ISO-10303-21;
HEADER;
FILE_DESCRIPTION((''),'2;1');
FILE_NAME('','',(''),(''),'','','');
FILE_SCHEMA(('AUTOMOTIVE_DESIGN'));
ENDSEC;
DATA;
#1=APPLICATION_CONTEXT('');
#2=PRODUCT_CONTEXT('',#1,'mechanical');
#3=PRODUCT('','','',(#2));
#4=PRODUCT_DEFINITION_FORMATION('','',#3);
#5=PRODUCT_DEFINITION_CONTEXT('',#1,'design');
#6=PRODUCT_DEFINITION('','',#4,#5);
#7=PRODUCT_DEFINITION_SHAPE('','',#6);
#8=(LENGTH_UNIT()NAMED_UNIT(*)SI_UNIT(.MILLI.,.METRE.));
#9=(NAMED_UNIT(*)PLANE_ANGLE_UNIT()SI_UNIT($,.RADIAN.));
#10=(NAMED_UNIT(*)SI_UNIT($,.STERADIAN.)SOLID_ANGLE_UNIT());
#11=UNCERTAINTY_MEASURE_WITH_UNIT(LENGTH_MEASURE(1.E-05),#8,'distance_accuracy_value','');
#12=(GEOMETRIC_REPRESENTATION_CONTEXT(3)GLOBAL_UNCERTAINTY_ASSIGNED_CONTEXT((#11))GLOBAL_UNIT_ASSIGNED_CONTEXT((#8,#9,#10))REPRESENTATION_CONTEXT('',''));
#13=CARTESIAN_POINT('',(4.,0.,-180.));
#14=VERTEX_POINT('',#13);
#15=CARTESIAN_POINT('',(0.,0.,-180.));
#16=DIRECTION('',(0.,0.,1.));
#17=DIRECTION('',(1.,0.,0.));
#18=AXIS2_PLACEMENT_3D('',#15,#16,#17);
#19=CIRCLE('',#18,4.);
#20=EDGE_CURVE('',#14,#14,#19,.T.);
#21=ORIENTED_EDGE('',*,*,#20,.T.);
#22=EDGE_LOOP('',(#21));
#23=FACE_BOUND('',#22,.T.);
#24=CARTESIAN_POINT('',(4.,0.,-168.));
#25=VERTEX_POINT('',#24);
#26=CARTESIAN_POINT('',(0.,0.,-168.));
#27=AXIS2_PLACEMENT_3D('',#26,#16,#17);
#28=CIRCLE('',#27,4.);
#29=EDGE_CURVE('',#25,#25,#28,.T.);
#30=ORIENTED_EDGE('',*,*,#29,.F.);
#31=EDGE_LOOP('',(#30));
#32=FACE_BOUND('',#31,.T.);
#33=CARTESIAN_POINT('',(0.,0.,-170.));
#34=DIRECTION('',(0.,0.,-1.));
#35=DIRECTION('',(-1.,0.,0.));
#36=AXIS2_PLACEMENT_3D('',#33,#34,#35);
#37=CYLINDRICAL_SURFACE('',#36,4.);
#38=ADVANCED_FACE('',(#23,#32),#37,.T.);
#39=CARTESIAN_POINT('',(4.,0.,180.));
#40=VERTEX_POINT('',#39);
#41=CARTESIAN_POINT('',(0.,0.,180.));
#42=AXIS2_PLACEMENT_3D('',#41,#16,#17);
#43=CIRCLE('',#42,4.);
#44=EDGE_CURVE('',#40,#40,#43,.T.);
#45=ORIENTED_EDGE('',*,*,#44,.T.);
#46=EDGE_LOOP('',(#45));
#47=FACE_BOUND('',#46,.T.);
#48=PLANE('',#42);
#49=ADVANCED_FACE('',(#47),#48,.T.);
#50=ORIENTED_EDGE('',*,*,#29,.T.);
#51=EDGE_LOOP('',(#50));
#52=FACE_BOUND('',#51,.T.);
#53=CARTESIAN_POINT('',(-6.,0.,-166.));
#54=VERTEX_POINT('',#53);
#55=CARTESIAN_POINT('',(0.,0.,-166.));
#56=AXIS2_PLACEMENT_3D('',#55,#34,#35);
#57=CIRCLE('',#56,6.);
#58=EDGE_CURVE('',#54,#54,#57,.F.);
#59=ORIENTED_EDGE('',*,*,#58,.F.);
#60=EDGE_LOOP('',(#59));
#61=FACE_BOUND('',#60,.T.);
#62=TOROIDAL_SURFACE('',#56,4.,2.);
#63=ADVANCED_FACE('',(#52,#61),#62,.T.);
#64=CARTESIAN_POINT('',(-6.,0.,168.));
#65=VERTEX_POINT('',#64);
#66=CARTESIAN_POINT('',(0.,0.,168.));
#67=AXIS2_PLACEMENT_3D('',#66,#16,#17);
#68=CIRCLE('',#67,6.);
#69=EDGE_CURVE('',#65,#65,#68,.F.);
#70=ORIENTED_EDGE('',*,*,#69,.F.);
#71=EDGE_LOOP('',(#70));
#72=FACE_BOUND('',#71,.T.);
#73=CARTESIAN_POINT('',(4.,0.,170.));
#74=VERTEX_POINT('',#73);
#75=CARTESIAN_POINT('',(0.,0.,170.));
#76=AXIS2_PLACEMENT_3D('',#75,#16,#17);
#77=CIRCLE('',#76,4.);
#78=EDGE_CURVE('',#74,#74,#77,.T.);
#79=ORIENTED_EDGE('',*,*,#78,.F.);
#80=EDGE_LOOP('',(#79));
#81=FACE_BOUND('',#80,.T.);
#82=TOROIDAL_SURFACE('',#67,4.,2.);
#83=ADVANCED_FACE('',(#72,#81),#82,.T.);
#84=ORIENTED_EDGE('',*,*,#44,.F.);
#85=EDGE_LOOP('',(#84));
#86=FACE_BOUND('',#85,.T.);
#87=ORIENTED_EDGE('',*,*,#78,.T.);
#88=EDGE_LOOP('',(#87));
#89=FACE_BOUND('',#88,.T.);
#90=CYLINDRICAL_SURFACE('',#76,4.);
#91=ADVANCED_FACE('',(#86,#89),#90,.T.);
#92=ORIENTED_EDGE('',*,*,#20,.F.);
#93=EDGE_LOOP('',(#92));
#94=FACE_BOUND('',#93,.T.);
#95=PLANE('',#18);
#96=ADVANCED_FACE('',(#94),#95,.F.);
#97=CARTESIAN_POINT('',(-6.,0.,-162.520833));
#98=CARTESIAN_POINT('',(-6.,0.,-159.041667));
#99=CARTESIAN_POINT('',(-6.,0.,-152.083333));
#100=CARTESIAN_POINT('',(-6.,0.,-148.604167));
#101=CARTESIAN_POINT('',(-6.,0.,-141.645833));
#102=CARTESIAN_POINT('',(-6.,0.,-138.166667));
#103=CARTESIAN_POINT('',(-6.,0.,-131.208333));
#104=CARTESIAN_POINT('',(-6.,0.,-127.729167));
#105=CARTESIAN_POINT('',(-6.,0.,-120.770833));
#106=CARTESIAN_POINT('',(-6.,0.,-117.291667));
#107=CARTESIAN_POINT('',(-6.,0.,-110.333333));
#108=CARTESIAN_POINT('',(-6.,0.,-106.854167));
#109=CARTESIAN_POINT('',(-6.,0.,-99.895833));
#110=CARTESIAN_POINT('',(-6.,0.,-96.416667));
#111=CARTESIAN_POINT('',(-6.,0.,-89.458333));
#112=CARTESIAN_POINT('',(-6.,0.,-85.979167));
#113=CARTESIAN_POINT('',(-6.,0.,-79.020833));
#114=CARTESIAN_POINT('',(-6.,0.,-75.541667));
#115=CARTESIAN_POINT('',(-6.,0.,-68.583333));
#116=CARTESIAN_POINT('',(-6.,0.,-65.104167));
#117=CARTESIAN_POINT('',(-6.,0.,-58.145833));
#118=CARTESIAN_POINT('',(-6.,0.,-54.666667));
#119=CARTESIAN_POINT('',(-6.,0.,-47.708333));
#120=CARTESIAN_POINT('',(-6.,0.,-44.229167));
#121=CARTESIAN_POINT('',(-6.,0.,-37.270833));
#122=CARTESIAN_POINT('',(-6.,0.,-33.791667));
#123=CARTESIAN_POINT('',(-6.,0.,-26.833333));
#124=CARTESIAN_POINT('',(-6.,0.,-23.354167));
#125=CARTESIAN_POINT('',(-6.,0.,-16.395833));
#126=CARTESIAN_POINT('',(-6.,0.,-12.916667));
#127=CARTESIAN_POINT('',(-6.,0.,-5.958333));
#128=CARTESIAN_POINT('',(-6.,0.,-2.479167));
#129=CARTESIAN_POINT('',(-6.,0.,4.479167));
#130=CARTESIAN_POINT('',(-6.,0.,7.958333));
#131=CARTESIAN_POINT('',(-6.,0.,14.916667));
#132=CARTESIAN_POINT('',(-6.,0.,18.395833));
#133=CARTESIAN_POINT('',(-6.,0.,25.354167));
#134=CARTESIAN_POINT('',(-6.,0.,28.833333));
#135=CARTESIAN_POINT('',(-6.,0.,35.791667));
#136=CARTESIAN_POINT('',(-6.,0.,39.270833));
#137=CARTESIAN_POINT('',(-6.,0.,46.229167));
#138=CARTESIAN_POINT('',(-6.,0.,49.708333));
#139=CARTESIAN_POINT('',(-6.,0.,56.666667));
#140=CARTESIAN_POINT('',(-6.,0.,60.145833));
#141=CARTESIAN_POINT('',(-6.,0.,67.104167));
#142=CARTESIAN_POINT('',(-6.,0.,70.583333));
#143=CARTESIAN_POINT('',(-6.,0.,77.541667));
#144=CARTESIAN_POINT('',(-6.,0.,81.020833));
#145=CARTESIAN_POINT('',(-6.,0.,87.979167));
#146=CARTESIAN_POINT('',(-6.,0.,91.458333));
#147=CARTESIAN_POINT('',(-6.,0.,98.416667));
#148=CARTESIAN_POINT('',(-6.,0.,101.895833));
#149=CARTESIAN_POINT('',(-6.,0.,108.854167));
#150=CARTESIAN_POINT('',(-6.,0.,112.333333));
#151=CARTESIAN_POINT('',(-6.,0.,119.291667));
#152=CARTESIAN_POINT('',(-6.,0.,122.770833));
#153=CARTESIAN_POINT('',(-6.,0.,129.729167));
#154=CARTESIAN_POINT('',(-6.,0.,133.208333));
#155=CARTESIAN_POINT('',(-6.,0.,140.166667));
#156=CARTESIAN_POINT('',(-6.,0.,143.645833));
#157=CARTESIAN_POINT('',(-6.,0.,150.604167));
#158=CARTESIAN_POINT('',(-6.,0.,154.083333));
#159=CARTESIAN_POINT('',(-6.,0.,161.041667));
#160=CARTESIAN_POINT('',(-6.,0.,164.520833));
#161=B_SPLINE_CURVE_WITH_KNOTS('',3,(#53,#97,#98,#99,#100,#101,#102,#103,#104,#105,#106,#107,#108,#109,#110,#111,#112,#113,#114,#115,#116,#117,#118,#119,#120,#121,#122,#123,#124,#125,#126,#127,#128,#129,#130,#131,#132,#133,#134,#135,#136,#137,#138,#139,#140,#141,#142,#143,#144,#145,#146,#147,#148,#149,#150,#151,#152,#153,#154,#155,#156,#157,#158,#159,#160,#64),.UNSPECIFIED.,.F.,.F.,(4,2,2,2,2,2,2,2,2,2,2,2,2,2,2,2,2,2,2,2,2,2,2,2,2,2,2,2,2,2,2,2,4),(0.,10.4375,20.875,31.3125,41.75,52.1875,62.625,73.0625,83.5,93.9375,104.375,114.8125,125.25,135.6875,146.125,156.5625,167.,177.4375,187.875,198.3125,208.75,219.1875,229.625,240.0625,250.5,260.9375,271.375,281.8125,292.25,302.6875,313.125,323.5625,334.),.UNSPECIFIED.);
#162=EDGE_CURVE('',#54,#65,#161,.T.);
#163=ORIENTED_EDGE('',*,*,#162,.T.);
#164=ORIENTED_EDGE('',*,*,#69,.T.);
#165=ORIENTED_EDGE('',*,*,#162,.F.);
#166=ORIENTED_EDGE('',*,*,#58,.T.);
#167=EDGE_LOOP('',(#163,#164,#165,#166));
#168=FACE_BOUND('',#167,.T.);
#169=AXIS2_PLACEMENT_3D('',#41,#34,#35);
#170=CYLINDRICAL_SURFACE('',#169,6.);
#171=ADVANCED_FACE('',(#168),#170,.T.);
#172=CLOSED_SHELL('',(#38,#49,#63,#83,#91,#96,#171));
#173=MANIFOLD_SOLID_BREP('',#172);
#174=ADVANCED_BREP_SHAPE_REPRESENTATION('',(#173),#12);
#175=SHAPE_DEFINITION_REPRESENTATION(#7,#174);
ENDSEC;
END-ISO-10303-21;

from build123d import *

# Parameters (mm, degrees)
SKETCH1_R              = 6
BOSS_EXTRUDE1_DEPTH    = 180
SKETCH2_R              = 6
SKETCH2_R_2            = 4
CUT_EXTRUDE1_DEPTH     = 10
FILLET1_R              = 2
FILLET1_OF_MIRROR1_R   = 2
MOVE_START             = -180.0000001
MOVE_FACE1_2_OUTLINE_W = 16
MOVE_FACE1_2_OUTLINE_H = 16
MOVE_FACE1_2_OUTLINE_R = 4
MOVE_FACE1_2_DEPTH     = 12.0000001


with BuildPart() as part:
    # Sketch1 → Boss-Extrude1 (new, symmetric)
    with BuildSketch(Plane.XY):
        with Locations(Location((0, 0, 0), (0, 0, 180))):
            Circle(SKETCH1_R)
    extrude(amount=BOSS_EXTRUDE1_DEPTH, both=True)

    # Sketch2 → Cut-Extrude1 (cut)
    with BuildSketch(Plane.XY.offset(180)):
        with Locations(Location((0, 0, 0), (0, 0, 180))):
            Circle(SKETCH2_R)
        Circle(SKETCH2_R_2, mode=Mode.SUBTRACT)
    cut_extrude1 = extrude(amount=-CUT_EXTRUDE1_DEPTH, mode=Mode.SUBTRACT)

    # Fillet1
    fillet1_edges = [part.edges().sort_by_distance(p)[0] for p in [
        (6, 0, 170),
    ]]
    fillet(fillet1_edges, radius=FILLET1_R - 0.0001)  # a hair under: the kernel refuses the full size

    # Mirror1: Cut-Extrude1 across plane
    add(cut_extrude1.mirror(Plane.XY), mode=Mode.SUBTRACT)

    # Fillet1 of Mirror1
    fillet1_of_mirror1_edges = [part.edges().sort_by_distance(p)[0] for p in [
        (6, 0, -170),
    ]]
    fillet(fillet1_of_mirror1_edges, radius=FILLET1_OF_MIRROR1_R - 0.0001)  # a hair under: the kernel refuses the full size

    # Move Face1: read off the stored shape, not the designer's step
    # Move Face1 outline → Move Face1 (revolve, cut)
    with BuildSketch(Plane.XZ):
        with BuildLine():
            Line((6, -168), (6, -166))
            ThreePointArc((6, -166), (5.414213562, -167.414213562), (4, -168))
            Line((4, -168), (6, -168))
        make_face()
    revolve(axis=Axis((0, 0, 0), (0, 0, 1)), mode=Mode.SUBTRACT)

    # Move Face1 2 outline → Move Face1 2 (cut)
    with BuildSketch(Plane.XY.offset(MOVE_START)):
        Rectangle(MOVE_FACE1_2_OUTLINE_W, MOVE_FACE1_2_OUTLINE_H)
        Circle(MOVE_FACE1_2_OUTLINE_R, mode=Mode.SUBTRACT)
    extrude(amount=MOVE_FACE1_2_DEPTH, mode=Mode.SUBTRACT)


solid = part.part
